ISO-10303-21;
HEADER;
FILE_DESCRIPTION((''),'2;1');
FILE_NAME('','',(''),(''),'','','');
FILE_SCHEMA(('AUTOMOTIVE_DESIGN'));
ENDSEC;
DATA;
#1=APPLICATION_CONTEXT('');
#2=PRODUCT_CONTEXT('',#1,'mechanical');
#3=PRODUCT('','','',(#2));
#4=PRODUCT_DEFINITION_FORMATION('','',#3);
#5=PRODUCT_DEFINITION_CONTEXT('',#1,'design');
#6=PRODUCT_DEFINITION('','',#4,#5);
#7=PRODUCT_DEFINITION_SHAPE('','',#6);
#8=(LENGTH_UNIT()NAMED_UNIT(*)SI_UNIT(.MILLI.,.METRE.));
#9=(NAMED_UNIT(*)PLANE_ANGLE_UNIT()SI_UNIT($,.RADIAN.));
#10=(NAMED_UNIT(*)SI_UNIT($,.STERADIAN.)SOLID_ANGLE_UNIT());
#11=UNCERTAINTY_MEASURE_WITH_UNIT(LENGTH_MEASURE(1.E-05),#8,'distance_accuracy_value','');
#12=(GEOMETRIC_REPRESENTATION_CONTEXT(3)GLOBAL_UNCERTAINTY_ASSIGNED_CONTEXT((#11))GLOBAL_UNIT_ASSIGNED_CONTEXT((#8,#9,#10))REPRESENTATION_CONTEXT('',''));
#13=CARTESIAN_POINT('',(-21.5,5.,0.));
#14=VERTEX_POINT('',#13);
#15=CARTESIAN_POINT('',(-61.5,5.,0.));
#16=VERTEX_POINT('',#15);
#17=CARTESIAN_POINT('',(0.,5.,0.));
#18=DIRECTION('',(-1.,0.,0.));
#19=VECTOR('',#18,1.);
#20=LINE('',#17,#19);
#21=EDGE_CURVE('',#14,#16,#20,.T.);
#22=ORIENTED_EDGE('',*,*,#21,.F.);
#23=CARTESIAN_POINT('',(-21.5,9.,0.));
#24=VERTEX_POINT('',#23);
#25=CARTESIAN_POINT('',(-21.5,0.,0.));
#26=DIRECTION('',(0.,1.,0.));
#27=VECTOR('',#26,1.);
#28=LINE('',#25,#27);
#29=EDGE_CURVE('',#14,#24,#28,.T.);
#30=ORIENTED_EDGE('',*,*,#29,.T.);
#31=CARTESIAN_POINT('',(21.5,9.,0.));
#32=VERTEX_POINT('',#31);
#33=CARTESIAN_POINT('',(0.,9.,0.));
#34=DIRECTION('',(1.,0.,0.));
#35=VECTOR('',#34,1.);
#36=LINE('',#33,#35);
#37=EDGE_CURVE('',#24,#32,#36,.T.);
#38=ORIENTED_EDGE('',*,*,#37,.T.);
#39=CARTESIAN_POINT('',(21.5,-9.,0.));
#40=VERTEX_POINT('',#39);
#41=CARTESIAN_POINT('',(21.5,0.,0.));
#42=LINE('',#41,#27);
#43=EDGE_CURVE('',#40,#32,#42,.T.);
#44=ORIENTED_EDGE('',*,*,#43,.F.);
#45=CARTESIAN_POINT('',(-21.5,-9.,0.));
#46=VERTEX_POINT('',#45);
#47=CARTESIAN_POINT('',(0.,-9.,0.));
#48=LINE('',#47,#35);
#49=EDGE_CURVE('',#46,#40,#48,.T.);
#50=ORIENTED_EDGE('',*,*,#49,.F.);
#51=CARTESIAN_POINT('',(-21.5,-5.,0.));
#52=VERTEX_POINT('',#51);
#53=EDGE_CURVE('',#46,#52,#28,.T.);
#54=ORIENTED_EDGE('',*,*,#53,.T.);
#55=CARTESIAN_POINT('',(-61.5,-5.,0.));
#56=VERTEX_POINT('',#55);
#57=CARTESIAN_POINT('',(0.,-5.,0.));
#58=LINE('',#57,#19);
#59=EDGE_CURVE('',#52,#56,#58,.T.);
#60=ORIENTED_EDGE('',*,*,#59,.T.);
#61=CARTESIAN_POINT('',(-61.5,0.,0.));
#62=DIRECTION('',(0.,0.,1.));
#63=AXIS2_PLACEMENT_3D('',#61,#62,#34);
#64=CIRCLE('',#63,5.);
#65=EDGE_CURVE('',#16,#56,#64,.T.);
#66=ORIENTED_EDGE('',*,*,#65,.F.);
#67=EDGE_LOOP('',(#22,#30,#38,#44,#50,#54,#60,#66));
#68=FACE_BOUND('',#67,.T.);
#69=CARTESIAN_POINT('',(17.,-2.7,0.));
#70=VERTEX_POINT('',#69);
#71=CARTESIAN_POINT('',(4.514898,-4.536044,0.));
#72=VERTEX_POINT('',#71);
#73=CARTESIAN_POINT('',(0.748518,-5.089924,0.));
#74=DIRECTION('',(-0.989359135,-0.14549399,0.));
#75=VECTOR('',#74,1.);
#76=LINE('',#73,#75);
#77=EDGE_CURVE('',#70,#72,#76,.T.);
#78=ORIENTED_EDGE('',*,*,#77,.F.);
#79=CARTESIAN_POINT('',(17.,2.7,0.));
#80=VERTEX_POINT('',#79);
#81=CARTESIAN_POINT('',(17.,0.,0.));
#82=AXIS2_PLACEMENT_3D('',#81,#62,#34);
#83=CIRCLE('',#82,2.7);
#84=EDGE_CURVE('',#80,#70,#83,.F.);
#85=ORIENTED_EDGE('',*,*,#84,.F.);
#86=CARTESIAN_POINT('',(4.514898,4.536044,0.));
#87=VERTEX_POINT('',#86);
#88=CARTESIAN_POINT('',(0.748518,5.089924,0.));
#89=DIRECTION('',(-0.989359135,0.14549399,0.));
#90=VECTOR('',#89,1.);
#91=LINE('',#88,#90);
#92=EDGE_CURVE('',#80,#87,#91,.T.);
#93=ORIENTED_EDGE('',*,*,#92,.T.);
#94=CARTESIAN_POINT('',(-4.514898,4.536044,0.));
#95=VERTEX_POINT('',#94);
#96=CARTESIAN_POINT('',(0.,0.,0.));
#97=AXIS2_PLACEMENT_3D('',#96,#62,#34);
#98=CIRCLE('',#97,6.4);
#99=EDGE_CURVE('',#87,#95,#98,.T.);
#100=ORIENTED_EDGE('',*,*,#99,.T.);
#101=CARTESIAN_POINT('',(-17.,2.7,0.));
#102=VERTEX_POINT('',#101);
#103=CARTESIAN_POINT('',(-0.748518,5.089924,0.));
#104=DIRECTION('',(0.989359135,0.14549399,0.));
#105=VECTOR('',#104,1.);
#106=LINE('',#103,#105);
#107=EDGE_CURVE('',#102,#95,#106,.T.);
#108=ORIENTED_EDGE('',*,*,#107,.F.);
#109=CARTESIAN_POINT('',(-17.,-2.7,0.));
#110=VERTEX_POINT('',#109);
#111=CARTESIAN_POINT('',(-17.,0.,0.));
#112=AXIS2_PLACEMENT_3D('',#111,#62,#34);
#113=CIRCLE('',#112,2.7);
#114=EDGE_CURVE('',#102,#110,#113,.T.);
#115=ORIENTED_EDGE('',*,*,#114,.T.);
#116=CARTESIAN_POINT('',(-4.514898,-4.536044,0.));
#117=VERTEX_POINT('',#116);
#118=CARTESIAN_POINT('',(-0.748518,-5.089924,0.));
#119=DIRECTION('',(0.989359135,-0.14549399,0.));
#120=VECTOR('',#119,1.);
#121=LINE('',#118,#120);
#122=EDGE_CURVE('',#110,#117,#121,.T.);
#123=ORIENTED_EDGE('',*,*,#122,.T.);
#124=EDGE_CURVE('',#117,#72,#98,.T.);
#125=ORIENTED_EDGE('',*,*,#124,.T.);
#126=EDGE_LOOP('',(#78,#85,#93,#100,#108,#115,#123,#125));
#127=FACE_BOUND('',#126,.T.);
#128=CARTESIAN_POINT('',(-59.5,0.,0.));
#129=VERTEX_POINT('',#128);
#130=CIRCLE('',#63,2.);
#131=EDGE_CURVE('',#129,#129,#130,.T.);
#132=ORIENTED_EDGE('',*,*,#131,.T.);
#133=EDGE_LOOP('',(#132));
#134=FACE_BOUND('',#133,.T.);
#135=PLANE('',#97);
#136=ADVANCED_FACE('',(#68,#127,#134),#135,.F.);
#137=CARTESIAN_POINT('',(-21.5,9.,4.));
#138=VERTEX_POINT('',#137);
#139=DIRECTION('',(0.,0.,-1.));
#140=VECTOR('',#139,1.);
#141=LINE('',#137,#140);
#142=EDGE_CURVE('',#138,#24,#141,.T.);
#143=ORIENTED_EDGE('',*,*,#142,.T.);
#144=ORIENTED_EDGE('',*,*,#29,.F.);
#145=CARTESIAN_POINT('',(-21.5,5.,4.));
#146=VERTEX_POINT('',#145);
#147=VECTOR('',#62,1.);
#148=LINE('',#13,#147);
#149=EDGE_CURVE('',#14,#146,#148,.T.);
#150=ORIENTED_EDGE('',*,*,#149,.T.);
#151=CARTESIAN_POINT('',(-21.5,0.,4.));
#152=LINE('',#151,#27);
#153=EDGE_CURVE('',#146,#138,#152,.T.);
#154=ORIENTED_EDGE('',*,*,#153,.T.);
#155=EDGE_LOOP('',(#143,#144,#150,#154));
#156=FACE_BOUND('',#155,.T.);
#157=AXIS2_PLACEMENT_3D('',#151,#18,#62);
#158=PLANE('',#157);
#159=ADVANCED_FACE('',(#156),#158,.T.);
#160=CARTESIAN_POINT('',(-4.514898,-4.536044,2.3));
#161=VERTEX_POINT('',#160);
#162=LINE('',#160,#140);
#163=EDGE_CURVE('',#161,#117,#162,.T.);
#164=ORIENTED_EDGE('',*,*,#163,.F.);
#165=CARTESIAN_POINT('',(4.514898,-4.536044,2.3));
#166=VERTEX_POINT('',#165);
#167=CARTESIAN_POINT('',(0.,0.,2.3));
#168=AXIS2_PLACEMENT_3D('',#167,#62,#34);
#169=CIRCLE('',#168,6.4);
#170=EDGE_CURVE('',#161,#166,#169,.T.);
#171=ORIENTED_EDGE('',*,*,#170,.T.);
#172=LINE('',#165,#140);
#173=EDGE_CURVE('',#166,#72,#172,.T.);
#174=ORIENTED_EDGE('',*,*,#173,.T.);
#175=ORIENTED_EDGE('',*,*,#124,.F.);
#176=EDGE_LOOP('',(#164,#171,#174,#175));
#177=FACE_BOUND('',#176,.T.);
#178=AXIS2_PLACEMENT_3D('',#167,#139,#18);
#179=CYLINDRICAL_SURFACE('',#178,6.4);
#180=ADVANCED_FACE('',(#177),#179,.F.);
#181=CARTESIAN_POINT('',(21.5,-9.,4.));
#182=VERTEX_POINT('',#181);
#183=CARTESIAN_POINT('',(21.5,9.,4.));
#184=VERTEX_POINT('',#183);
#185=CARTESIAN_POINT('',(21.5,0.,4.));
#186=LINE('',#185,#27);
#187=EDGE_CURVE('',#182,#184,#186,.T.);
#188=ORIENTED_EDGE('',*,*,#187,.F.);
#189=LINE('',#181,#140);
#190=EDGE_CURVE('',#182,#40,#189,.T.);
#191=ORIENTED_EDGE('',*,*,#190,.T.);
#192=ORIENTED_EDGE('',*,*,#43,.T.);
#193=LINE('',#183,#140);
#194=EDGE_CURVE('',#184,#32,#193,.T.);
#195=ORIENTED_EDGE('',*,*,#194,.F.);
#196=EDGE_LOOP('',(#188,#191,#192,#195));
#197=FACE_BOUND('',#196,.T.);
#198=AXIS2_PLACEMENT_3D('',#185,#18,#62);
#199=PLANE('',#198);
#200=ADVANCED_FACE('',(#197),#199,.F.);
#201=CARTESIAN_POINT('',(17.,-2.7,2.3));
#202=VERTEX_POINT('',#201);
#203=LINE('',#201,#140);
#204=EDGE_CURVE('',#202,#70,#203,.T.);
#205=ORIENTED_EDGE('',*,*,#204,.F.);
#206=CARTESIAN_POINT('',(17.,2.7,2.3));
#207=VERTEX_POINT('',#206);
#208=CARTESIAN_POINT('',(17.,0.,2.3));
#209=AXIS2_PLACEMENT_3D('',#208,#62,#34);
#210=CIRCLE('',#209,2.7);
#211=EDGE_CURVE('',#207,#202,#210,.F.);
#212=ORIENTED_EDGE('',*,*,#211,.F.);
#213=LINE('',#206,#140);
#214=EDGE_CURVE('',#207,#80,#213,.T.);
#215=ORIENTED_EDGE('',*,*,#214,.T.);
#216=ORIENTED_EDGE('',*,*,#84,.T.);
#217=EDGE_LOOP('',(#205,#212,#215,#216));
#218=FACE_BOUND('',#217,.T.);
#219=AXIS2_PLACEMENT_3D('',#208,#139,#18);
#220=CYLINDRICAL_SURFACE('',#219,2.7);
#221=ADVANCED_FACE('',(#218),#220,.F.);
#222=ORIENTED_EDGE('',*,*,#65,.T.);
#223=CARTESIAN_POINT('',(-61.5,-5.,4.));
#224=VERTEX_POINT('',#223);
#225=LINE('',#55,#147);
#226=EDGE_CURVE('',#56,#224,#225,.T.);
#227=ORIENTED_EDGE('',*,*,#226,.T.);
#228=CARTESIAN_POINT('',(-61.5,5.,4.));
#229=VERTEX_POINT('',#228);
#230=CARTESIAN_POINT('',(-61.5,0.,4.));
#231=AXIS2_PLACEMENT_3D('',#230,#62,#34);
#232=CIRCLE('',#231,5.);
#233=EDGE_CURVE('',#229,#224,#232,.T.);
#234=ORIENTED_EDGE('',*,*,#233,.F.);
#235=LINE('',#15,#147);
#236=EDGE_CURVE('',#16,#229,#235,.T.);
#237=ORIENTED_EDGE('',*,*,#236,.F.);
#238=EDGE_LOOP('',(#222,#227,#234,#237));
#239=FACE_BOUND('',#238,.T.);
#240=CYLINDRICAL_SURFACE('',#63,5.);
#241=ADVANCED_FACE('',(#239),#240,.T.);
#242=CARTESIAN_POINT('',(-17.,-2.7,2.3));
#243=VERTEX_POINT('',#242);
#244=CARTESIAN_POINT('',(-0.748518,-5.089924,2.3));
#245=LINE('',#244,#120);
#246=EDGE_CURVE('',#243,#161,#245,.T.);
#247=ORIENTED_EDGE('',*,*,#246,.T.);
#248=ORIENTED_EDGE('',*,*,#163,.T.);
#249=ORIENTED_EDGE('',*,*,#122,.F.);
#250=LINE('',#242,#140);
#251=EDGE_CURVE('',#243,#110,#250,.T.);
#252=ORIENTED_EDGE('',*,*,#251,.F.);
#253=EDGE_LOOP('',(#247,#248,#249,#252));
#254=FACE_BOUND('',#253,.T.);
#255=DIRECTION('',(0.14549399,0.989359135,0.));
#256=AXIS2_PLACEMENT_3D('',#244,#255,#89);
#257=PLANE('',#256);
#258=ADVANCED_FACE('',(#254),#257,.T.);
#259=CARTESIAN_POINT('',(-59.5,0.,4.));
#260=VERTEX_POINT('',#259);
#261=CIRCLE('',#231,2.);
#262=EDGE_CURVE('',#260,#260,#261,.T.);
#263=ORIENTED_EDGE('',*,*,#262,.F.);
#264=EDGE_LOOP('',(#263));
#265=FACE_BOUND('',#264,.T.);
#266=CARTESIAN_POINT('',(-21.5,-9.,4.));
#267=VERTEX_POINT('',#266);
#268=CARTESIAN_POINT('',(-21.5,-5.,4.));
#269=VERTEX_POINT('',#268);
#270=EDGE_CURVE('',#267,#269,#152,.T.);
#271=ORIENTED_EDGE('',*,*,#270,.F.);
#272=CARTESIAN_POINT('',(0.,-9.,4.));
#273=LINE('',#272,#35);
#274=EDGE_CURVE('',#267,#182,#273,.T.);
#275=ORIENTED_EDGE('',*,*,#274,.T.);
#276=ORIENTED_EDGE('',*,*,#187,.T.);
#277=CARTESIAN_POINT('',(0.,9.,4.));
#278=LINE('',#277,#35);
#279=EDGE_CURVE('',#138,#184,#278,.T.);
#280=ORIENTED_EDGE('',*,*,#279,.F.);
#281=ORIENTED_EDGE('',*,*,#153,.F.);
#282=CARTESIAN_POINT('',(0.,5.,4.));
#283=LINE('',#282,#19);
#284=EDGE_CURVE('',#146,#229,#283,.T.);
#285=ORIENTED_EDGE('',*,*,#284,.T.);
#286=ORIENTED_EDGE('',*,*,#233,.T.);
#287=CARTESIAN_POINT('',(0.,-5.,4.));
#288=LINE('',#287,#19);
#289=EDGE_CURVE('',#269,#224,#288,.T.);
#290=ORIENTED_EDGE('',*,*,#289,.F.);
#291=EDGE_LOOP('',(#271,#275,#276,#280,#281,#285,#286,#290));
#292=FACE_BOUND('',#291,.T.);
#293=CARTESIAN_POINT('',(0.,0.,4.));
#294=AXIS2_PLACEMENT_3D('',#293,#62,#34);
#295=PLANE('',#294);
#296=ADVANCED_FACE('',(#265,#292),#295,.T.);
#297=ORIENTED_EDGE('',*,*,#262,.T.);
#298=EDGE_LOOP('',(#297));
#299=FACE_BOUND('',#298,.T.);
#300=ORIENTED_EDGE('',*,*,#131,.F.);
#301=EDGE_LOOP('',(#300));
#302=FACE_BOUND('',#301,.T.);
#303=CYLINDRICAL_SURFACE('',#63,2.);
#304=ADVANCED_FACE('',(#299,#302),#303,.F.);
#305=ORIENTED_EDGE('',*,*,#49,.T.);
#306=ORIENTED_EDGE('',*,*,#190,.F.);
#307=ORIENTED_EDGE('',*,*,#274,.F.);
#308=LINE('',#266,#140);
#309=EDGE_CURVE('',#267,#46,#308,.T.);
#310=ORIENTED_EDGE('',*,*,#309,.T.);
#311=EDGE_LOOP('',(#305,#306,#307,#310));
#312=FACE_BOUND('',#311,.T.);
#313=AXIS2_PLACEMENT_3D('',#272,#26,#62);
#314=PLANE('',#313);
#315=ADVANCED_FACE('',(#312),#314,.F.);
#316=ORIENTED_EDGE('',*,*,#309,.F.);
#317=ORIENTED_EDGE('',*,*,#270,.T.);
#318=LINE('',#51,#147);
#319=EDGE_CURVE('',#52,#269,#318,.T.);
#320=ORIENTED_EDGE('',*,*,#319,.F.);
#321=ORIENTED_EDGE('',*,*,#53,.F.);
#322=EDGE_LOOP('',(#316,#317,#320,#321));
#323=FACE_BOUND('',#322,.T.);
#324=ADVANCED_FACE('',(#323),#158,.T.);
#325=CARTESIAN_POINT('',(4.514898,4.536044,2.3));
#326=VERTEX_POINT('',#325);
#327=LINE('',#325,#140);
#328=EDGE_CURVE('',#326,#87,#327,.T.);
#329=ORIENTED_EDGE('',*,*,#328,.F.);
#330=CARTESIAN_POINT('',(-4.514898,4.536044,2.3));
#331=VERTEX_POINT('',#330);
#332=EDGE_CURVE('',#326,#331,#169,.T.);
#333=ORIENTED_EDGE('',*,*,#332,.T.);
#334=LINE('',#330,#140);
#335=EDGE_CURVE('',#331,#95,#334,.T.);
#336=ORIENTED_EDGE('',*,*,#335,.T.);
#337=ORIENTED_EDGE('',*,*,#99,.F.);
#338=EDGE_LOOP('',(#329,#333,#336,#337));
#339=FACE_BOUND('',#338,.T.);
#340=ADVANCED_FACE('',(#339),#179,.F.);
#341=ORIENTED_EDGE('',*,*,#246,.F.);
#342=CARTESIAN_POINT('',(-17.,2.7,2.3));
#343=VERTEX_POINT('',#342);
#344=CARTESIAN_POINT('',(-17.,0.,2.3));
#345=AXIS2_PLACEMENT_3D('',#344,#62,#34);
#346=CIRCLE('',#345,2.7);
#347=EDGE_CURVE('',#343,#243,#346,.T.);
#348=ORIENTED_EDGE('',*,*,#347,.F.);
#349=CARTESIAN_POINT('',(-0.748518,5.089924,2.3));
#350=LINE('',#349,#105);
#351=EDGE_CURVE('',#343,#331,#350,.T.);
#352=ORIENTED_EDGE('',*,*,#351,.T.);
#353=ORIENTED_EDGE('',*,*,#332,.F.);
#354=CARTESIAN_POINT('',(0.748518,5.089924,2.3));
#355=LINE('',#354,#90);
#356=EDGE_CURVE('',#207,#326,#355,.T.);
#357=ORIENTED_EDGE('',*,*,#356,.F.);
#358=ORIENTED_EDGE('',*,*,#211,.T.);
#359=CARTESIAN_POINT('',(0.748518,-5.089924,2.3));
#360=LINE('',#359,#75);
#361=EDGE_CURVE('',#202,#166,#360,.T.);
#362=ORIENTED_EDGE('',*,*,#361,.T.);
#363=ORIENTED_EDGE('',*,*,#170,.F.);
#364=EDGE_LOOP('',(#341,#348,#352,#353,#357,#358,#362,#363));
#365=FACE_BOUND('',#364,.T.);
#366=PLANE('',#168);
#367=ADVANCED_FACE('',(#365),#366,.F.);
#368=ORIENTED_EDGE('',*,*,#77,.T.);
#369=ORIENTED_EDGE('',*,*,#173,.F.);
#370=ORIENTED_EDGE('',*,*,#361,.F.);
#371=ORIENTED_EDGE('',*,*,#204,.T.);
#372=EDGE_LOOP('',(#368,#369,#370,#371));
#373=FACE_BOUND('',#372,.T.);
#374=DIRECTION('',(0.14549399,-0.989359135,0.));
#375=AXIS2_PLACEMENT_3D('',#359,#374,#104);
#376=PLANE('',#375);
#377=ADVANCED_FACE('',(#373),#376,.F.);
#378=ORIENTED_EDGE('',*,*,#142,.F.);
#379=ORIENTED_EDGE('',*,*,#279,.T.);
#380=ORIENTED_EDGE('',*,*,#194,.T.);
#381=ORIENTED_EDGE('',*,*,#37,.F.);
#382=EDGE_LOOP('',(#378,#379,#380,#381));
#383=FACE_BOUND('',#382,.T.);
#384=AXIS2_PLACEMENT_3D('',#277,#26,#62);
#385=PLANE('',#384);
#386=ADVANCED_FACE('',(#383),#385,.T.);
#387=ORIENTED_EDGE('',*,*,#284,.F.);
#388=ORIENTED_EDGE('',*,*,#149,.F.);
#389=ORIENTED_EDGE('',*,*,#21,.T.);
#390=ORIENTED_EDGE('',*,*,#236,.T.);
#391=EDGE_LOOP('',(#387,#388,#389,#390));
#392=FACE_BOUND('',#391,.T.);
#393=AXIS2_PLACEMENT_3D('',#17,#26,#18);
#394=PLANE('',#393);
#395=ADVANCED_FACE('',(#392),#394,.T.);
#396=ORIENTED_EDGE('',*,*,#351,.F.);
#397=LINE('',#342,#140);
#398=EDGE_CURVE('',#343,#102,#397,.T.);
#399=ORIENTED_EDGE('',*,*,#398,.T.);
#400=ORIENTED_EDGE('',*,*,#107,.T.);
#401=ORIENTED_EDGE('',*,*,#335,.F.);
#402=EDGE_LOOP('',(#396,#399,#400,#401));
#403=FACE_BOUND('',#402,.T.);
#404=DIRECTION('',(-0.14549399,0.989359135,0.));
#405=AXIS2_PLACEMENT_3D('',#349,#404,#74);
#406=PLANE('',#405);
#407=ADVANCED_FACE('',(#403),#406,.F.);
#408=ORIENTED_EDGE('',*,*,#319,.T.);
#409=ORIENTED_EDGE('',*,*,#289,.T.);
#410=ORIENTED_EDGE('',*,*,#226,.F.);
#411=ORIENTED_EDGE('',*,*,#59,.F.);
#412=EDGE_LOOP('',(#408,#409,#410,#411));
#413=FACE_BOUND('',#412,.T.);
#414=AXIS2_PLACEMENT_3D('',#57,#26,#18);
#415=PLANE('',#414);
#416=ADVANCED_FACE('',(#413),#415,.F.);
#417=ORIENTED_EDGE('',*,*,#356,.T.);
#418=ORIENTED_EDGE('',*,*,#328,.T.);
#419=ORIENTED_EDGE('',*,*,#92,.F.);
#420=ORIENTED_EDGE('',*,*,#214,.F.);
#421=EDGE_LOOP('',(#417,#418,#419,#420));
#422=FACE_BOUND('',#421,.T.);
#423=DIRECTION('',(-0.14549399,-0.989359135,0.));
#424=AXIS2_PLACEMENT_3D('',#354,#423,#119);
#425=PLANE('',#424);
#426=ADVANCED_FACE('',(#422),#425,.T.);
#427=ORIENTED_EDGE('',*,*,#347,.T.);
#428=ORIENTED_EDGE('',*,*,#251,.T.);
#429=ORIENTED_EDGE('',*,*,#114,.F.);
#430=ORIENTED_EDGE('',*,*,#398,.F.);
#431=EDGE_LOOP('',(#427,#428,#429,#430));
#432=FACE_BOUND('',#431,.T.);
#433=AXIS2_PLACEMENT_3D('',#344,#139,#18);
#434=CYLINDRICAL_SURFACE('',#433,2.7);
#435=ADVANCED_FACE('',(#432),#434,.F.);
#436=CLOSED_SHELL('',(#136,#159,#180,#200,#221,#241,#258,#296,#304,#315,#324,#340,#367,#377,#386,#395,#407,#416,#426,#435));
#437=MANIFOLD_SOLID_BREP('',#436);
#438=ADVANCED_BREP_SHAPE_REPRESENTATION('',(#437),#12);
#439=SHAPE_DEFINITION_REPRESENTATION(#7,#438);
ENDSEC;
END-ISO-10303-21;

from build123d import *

# Parameters (mm, degrees)
SKETCH1_W           = 43
SKETCH1_H           = 18
BOSS_EXTRUDE1_DEPTH = 4
CAVITY2_DEPTH       = 2.3
BOSS_EXTRUDE2_DEPTH = 4


# Read off the part's stored shape, not the designer's step: Cavity2
with BuildPart() as part:
    # Sketch1 → Boss-Extrude1 (new body)
    with BuildSketch(Plane.XY):
        Rectangle(SKETCH1_W, SKETCH1_H)
    extrude(amount=BOSS_EXTRUDE1_DEPTH)

    # Cavity2 outline → Cavity2 (cut)
    with BuildSketch(Plane.XY):
        with BuildLine():
            ThreePointArc((-4.514897629, -4.536044466), (0, -6.4), (4.514897629, -4.536044466))
            Line((4.514897629, -4.536044466), (17, -2.7))
            ThreePointArc((17, -2.7), (19.7, 0), (17, 2.7))
            Line((17, 2.7), (4.514897629, 4.536044466))
            ThreePointArc((4.514897629, 4.536044466), (0, 6.4), (-4.514897629, 4.536044466))
            Line((-4.514897629, 4.536044466), (-17, 2.7))
            ThreePointArc((-17, 2.7), (-19.7, 0), (-17, -2.7))
            Line((-17, -2.7), (-4.514897629, -4.536044466))
        make_face()
    extrude(amount=CAVITY2_DEPTH, mode=Mode.SUBTRACT)

    # Sketch4 → Boss-Extrude2 (add)
    with BuildSketch(Plane.XY.offset(4)):
        with BuildLine():
            ThreePointArc((-56.5, 0), (-57.964466094, 3.535533906), (-61.5, 5))
            Line((-61.5, 5), (-61.5, 2))
            ThreePointArc((-61.5, 2), (-60.085786438, 1.414213562), (-59.5, 0))
            ThreePointArc((-59.5, 0), (-60.085786438, -1.414213562), (-61.5, -2))
            Line((-61.5, -2), (-61.5, -5))
            ThreePointArc((-61.5, -5), (-57.964466094, -3.535533906), (-56.5, 0))
        make_face()
        with BuildLine():
            Line((-61.5, 2), (-61.5, 5))
            ThreePointArc((-61.5, 5), (-66.5, 0), (-61.5, -5))
            Line((-61.5, -5), (-61.5, -2))
            ThreePointArc((-61.5, -2), (-63.5, 0), (-61.5, 2))
        make_face()
        with BuildLine():
            Line((-21.5, -5), (-21.5, 5))
            Line((-21.5, 5), (-61.5, 5))
            ThreePointArc((-61.5, 5), (-57.964466094, 3.535533906), (-56.5, 0))
            ThreePointArc((-56.5, 0), (-57.964466094, -3.535533906), (-61.5, -5))
            Line((-61.5, -5), (-21.5, -5))
        make_face()
    extrude(amount=-BOSS_EXTRUDE2_DEPTH)


solid = part.part
